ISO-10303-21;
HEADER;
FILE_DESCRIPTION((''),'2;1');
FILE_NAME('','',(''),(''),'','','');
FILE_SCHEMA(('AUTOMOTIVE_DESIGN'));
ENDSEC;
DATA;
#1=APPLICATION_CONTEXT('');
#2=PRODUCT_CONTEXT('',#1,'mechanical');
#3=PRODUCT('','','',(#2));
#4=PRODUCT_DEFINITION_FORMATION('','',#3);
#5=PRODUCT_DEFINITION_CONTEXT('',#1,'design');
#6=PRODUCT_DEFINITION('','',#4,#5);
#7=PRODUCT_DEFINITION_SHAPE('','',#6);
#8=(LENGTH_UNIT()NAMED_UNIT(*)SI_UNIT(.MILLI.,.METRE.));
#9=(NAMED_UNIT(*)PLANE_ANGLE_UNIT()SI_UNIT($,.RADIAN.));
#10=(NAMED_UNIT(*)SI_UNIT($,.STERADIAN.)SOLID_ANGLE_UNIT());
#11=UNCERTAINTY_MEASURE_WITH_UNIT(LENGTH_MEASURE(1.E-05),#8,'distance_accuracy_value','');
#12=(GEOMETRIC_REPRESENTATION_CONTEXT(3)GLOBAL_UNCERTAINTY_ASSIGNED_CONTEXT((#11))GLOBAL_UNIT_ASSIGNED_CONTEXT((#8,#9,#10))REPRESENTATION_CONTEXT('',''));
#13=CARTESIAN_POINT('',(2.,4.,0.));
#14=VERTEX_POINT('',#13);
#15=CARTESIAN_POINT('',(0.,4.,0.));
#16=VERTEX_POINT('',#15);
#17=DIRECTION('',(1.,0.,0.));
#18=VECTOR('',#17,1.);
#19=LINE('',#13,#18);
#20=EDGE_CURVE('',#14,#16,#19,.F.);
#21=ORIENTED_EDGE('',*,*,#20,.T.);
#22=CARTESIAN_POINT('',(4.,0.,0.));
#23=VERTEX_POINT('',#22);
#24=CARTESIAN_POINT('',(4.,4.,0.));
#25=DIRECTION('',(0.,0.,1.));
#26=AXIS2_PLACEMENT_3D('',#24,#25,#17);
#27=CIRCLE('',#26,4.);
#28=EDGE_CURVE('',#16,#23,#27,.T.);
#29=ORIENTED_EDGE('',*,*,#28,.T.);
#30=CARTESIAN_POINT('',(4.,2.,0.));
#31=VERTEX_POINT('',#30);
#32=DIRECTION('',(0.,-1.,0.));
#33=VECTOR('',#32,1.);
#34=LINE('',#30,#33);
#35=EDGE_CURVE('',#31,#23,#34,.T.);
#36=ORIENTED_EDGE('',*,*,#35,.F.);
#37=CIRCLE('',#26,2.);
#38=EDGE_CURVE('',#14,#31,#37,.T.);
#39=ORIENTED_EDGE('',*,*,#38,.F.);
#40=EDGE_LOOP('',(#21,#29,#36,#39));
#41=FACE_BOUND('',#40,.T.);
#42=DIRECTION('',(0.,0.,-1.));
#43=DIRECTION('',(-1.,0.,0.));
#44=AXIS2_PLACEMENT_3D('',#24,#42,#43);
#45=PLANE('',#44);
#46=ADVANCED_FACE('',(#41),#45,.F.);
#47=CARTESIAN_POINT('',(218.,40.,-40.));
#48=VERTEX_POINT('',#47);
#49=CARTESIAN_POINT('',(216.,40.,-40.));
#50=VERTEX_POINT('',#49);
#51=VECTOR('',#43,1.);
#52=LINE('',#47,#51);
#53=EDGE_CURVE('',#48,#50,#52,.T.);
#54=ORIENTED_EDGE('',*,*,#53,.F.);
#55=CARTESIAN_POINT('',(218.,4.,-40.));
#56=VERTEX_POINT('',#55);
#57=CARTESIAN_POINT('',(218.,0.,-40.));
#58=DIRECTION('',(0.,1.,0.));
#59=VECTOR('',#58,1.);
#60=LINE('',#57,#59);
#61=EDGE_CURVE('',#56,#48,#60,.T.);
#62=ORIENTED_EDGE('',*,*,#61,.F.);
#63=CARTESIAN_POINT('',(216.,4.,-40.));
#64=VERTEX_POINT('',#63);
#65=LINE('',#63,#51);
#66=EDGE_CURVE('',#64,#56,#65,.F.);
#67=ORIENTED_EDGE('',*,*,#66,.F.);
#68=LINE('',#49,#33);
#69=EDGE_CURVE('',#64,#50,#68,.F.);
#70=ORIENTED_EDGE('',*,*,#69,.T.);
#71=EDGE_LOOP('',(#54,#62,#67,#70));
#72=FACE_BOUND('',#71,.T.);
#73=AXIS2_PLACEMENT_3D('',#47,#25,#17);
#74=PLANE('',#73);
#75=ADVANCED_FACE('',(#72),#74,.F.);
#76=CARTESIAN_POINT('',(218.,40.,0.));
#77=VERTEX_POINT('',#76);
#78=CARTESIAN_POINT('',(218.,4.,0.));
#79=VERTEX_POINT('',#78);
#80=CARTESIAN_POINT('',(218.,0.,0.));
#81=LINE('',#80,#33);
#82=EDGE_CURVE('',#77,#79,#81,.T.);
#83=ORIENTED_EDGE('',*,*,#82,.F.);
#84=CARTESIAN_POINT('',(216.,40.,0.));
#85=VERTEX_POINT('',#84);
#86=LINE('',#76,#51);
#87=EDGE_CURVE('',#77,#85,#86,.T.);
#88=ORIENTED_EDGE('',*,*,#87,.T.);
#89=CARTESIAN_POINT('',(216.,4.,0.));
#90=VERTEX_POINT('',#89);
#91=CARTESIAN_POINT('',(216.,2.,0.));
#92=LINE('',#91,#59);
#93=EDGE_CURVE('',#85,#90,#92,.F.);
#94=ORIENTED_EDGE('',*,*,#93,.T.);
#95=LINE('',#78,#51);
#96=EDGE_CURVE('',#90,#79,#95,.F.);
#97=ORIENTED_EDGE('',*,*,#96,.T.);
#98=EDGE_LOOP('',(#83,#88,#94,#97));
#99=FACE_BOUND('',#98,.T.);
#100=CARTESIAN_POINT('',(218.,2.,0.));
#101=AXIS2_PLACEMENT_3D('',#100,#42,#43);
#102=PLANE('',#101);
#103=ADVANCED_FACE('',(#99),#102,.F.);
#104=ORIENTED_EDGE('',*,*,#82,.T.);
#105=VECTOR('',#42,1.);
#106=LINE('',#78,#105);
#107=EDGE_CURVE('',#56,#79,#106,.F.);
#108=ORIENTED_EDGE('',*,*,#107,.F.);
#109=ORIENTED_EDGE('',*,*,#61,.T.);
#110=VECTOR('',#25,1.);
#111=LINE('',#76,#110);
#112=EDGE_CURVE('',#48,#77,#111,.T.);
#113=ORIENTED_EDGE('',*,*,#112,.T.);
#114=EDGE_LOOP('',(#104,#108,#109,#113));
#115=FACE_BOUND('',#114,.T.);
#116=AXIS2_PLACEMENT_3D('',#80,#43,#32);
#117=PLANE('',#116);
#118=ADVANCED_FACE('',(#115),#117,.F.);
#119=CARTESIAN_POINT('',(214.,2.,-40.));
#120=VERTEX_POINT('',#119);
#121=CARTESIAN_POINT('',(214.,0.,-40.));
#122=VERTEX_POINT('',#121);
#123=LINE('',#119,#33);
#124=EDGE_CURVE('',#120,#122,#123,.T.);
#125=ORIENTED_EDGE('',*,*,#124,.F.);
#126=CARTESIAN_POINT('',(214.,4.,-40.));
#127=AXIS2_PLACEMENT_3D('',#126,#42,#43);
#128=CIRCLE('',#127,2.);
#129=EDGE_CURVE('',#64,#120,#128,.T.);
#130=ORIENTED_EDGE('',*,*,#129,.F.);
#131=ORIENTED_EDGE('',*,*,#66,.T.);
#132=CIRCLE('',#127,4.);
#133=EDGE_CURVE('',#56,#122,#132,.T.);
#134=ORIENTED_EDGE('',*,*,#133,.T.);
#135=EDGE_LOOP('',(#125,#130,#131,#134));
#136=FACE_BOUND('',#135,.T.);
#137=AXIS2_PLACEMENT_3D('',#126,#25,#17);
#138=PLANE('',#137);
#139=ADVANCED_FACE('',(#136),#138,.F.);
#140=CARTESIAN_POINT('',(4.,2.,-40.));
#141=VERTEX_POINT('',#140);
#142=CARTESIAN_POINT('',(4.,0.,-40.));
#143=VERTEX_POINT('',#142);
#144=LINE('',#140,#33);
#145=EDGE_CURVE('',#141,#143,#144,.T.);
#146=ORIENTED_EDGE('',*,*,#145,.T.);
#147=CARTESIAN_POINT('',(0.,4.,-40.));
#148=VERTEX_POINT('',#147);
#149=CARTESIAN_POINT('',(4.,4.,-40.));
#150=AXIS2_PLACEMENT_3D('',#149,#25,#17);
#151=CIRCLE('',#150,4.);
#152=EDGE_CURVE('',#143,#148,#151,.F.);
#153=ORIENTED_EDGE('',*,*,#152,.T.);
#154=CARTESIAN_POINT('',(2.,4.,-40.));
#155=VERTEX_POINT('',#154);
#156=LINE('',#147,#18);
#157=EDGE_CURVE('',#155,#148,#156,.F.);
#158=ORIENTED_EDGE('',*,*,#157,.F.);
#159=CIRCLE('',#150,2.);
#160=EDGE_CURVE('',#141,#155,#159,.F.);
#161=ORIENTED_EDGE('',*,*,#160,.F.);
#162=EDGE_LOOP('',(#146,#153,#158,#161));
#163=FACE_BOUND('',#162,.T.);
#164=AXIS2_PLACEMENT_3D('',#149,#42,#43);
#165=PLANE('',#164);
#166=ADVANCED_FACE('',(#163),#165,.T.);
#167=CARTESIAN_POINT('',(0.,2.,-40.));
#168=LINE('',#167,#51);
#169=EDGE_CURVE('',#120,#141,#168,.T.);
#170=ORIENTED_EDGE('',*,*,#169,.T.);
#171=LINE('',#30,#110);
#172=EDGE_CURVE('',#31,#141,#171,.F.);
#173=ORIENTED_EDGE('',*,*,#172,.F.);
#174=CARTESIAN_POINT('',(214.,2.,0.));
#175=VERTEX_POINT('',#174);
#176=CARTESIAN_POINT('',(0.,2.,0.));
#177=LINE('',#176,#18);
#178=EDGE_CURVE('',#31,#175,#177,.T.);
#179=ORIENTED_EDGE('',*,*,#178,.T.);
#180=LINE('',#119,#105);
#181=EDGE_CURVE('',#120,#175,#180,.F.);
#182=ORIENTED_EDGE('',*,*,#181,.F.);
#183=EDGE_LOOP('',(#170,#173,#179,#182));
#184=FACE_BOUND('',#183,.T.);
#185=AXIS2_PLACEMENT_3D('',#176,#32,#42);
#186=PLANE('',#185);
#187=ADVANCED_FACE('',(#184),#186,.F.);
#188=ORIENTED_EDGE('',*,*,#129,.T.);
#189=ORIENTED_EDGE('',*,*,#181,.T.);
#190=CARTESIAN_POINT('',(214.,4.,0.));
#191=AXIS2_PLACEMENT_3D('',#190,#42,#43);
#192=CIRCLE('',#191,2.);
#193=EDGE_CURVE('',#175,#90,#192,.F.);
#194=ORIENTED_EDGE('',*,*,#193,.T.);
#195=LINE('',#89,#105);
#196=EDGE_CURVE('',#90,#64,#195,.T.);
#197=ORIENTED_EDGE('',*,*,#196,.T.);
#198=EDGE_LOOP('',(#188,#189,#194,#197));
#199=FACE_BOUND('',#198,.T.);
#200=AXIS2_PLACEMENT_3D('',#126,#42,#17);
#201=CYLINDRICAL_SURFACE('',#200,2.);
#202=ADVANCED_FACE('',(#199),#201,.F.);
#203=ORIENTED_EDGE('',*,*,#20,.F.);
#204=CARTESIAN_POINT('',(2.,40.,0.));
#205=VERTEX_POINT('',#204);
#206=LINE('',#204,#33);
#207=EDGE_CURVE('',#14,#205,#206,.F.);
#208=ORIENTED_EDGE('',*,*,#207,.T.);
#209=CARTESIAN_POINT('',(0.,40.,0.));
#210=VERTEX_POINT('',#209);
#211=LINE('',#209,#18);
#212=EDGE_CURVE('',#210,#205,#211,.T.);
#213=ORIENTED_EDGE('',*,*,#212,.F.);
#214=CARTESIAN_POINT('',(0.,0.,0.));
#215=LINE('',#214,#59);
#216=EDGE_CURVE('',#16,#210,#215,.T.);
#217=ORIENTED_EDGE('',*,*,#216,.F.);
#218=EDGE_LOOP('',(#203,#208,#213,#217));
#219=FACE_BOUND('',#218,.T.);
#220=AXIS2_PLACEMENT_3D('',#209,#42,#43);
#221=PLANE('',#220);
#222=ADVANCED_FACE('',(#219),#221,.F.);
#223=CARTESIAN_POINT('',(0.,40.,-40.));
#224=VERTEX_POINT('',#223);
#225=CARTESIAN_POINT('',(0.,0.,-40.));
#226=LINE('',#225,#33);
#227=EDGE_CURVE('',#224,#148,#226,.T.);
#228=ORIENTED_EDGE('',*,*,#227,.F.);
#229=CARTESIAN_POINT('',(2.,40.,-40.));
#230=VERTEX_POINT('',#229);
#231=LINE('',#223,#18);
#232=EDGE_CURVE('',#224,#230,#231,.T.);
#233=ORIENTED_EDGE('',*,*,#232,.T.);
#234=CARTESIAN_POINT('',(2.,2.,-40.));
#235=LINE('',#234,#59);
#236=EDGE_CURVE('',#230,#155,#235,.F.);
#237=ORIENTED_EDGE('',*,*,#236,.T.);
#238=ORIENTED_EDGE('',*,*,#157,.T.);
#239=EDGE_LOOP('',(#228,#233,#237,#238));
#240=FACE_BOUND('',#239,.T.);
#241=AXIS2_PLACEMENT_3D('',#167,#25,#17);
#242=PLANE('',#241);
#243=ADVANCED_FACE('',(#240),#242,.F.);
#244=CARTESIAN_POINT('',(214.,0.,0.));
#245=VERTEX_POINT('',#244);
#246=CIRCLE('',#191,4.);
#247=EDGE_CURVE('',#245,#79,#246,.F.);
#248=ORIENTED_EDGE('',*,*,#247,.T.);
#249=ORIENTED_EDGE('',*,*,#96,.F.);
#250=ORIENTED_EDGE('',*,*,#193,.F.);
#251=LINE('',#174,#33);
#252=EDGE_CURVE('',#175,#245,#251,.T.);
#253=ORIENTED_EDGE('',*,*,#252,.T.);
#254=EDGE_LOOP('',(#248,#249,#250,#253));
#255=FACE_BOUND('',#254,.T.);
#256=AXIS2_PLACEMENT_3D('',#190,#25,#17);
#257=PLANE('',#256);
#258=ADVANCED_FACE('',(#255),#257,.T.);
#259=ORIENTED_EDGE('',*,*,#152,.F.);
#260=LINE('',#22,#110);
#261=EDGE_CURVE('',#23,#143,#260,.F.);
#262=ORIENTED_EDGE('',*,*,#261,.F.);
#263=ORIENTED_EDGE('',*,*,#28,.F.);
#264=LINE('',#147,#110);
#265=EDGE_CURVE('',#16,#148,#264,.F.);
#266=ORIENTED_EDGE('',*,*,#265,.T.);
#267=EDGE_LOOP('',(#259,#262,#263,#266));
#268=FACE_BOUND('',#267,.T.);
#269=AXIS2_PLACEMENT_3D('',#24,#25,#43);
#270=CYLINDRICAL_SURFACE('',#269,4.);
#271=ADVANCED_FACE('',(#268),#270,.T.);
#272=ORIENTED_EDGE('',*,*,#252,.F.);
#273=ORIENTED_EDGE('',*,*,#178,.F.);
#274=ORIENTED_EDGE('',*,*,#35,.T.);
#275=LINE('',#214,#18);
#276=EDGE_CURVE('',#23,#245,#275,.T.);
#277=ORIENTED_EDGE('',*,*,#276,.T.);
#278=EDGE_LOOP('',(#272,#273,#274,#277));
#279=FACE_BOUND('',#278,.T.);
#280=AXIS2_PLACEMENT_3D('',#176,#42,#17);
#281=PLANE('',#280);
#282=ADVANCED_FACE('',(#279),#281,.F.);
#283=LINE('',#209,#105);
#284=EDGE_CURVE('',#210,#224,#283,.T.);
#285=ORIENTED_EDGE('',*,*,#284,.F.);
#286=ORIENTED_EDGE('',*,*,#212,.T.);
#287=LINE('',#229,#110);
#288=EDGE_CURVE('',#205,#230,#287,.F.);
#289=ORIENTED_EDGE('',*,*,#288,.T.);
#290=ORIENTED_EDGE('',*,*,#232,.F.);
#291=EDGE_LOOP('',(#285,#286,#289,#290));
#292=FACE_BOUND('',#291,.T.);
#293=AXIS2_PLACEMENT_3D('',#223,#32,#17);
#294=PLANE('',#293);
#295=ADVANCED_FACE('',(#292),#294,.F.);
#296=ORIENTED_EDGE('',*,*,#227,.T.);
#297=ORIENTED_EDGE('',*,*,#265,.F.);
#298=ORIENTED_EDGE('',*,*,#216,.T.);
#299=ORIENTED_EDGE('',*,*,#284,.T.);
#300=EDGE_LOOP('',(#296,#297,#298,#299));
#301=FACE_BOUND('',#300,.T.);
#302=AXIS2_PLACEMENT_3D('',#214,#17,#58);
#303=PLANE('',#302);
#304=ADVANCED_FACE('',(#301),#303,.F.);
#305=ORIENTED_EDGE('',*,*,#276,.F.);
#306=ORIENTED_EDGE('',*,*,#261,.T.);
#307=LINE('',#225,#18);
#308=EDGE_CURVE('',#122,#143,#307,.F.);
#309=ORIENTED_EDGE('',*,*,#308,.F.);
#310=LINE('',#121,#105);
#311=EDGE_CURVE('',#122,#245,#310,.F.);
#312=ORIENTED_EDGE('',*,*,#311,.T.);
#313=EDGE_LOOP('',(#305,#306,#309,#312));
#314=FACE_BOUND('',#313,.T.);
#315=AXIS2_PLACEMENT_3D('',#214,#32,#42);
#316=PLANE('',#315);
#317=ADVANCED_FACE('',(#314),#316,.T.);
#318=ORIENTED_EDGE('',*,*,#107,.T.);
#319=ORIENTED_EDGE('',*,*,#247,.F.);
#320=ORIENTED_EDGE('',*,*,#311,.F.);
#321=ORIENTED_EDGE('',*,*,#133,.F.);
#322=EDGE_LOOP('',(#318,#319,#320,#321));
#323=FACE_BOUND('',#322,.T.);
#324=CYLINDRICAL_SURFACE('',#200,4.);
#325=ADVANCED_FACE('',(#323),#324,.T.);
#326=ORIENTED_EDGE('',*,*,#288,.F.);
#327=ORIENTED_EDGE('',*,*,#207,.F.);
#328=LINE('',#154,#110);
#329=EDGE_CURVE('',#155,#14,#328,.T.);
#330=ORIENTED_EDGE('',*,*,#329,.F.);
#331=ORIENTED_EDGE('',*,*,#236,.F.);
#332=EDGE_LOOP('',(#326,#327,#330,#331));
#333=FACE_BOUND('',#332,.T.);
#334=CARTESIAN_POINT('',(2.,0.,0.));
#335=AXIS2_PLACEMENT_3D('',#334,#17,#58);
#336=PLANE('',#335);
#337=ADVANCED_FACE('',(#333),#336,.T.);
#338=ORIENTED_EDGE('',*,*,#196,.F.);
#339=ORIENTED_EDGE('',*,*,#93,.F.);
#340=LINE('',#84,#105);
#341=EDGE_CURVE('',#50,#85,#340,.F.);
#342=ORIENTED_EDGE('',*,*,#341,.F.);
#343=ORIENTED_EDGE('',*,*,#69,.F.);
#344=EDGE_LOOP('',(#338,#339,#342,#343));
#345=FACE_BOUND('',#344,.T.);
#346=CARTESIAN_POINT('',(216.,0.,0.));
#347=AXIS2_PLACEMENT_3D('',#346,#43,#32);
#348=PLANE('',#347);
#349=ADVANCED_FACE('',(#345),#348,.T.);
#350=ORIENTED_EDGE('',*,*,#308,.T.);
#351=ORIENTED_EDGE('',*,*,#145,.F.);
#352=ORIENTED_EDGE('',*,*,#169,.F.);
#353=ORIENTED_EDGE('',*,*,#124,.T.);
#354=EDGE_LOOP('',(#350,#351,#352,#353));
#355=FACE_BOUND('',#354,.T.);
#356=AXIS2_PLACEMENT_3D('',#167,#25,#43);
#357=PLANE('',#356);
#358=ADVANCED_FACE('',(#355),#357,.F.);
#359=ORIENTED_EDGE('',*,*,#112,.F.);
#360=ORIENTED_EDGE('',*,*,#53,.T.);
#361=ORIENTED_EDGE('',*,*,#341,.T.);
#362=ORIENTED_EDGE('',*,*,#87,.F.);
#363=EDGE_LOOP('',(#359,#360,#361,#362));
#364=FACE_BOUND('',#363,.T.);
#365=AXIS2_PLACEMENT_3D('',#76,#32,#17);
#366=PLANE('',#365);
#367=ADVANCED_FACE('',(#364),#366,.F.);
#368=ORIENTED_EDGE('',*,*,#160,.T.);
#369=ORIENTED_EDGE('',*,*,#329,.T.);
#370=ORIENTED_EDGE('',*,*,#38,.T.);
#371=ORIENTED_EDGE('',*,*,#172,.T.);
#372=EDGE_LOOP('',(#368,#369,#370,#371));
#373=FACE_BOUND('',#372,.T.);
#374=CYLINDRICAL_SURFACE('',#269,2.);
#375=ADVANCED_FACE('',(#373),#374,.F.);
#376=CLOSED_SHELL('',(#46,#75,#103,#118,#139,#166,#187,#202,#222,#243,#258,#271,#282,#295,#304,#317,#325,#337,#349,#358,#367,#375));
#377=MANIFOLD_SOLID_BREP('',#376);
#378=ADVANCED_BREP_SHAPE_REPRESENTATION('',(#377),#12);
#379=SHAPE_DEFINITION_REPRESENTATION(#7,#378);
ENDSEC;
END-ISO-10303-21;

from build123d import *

# Parameters (mm, degrees)
SKETCH_1_W                       = 218
SKETCH_1_H                       = 40
EXTRUDE_1_DEPTH                  = 2
SM_EDGE_FLANGE_1_STRIP_W         = 12
SM_EDGE_FLANGE_1_STRIP_H         = 2
SM_EDGE_FLANGE_1_STRIP_CUT_DEPTH = 40
SM_EDGE_FLANGE_1_DEPTH           = 40
SM_EDGE_FLANGE_2_STRIP_W         = 12
SM_EDGE_FLANGE_2_STRIP_H         = 2
SM_EDGE_FLANGE_2_STRIP_CUT_DEPTH = 40
SM_EDGE_FLANGE_2_DEPTH           = 40


# Sheet-metal steps are written as plain solids
with BuildPart() as part:
    # Sketch 1 → Бобышка-Вытянуть1 (new body)
    with BuildSketch(Plane(origin=(0, 0, 0), x_dir=(1, 0, 0), z_dir=(0, 1, 0))):
        with Locations((109, 20)):
            Rectangle(SKETCH_1_W, SKETCH_1_H)
    extrude(amount=EXTRUDE_1_DEPTH)

    # Ребро-кромка1 strip (across the edge) → Ребро-кромка1 strip cut (cut)
    with BuildSketch(Plane(origin=(0, 2, -40), x_dir=(1, 0, 0), z_dir=(0, 0, 1))):
        with Locations((-2, -1)):
            Rectangle(SM_EDGE_FLANGE_1_STRIP_W, SM_EDGE_FLANGE_1_STRIP_H)
    extrude(amount=SM_EDGE_FLANGE_1_STRIP_CUT_DEPTH, mode=Mode.SUBTRACT)

    # Ребро-кромка1 section (across the edge) → Ребро-кромка1 (add)
    with BuildSketch(Plane(origin=(0, 2, -40), x_dir=(1, 0, 0), z_dir=(0, 0, 1))):
        with BuildLine():
            Line((0, 2), (0, 38))
            Line((0, 38), (2, 38))
            Line((2, 38), (2, 2))
            ThreePointArc((2, 2), (2.585786438, 0.585786438), (4, 0))
            Line((4, 0), (4, -2))
            ThreePointArc((4, -2), (1.171572875, -0.828427125), (0, 2))
        make_face()
    extrude(amount=SM_EDGE_FLANGE_1_DEPTH)

    # Ребро-кромка2 strip (across the edge) → Ребро-кромка2 strip cut (cut)
    with BuildSketch(Plane(origin=(218, 2, 0), x_dir=(-1, 0, 0), z_dir=(0, 0, -1))):
        with Locations((-2, -1)):
            Rectangle(SM_EDGE_FLANGE_2_STRIP_W, SM_EDGE_FLANGE_2_STRIP_H)
    extrude(amount=SM_EDGE_FLANGE_2_STRIP_CUT_DEPTH, mode=Mode.SUBTRACT)

    # Ребро-кромка2 section (across the edge) → Ребро-кромка2 (add)
    with BuildSketch(Plane(origin=(218, 2, 0), x_dir=(-1, 0, 0), z_dir=(0, 0, -1))):
        with BuildLine():
            Line((0, 2), (0, 38))
            Line((0, 38), (2, 38))
            Line((2, 38), (2, 2))
            ThreePointArc((2, 2), (2.585786438, 0.585786438), (4, 0))
            Line((4, 0), (4, -2))
            ThreePointArc((4, -2), (1.171572875, -0.828427125), (0, 2))
        make_face()
    extrude(amount=SM_EDGE_FLANGE_2_DEPTH)


solid = part.part
